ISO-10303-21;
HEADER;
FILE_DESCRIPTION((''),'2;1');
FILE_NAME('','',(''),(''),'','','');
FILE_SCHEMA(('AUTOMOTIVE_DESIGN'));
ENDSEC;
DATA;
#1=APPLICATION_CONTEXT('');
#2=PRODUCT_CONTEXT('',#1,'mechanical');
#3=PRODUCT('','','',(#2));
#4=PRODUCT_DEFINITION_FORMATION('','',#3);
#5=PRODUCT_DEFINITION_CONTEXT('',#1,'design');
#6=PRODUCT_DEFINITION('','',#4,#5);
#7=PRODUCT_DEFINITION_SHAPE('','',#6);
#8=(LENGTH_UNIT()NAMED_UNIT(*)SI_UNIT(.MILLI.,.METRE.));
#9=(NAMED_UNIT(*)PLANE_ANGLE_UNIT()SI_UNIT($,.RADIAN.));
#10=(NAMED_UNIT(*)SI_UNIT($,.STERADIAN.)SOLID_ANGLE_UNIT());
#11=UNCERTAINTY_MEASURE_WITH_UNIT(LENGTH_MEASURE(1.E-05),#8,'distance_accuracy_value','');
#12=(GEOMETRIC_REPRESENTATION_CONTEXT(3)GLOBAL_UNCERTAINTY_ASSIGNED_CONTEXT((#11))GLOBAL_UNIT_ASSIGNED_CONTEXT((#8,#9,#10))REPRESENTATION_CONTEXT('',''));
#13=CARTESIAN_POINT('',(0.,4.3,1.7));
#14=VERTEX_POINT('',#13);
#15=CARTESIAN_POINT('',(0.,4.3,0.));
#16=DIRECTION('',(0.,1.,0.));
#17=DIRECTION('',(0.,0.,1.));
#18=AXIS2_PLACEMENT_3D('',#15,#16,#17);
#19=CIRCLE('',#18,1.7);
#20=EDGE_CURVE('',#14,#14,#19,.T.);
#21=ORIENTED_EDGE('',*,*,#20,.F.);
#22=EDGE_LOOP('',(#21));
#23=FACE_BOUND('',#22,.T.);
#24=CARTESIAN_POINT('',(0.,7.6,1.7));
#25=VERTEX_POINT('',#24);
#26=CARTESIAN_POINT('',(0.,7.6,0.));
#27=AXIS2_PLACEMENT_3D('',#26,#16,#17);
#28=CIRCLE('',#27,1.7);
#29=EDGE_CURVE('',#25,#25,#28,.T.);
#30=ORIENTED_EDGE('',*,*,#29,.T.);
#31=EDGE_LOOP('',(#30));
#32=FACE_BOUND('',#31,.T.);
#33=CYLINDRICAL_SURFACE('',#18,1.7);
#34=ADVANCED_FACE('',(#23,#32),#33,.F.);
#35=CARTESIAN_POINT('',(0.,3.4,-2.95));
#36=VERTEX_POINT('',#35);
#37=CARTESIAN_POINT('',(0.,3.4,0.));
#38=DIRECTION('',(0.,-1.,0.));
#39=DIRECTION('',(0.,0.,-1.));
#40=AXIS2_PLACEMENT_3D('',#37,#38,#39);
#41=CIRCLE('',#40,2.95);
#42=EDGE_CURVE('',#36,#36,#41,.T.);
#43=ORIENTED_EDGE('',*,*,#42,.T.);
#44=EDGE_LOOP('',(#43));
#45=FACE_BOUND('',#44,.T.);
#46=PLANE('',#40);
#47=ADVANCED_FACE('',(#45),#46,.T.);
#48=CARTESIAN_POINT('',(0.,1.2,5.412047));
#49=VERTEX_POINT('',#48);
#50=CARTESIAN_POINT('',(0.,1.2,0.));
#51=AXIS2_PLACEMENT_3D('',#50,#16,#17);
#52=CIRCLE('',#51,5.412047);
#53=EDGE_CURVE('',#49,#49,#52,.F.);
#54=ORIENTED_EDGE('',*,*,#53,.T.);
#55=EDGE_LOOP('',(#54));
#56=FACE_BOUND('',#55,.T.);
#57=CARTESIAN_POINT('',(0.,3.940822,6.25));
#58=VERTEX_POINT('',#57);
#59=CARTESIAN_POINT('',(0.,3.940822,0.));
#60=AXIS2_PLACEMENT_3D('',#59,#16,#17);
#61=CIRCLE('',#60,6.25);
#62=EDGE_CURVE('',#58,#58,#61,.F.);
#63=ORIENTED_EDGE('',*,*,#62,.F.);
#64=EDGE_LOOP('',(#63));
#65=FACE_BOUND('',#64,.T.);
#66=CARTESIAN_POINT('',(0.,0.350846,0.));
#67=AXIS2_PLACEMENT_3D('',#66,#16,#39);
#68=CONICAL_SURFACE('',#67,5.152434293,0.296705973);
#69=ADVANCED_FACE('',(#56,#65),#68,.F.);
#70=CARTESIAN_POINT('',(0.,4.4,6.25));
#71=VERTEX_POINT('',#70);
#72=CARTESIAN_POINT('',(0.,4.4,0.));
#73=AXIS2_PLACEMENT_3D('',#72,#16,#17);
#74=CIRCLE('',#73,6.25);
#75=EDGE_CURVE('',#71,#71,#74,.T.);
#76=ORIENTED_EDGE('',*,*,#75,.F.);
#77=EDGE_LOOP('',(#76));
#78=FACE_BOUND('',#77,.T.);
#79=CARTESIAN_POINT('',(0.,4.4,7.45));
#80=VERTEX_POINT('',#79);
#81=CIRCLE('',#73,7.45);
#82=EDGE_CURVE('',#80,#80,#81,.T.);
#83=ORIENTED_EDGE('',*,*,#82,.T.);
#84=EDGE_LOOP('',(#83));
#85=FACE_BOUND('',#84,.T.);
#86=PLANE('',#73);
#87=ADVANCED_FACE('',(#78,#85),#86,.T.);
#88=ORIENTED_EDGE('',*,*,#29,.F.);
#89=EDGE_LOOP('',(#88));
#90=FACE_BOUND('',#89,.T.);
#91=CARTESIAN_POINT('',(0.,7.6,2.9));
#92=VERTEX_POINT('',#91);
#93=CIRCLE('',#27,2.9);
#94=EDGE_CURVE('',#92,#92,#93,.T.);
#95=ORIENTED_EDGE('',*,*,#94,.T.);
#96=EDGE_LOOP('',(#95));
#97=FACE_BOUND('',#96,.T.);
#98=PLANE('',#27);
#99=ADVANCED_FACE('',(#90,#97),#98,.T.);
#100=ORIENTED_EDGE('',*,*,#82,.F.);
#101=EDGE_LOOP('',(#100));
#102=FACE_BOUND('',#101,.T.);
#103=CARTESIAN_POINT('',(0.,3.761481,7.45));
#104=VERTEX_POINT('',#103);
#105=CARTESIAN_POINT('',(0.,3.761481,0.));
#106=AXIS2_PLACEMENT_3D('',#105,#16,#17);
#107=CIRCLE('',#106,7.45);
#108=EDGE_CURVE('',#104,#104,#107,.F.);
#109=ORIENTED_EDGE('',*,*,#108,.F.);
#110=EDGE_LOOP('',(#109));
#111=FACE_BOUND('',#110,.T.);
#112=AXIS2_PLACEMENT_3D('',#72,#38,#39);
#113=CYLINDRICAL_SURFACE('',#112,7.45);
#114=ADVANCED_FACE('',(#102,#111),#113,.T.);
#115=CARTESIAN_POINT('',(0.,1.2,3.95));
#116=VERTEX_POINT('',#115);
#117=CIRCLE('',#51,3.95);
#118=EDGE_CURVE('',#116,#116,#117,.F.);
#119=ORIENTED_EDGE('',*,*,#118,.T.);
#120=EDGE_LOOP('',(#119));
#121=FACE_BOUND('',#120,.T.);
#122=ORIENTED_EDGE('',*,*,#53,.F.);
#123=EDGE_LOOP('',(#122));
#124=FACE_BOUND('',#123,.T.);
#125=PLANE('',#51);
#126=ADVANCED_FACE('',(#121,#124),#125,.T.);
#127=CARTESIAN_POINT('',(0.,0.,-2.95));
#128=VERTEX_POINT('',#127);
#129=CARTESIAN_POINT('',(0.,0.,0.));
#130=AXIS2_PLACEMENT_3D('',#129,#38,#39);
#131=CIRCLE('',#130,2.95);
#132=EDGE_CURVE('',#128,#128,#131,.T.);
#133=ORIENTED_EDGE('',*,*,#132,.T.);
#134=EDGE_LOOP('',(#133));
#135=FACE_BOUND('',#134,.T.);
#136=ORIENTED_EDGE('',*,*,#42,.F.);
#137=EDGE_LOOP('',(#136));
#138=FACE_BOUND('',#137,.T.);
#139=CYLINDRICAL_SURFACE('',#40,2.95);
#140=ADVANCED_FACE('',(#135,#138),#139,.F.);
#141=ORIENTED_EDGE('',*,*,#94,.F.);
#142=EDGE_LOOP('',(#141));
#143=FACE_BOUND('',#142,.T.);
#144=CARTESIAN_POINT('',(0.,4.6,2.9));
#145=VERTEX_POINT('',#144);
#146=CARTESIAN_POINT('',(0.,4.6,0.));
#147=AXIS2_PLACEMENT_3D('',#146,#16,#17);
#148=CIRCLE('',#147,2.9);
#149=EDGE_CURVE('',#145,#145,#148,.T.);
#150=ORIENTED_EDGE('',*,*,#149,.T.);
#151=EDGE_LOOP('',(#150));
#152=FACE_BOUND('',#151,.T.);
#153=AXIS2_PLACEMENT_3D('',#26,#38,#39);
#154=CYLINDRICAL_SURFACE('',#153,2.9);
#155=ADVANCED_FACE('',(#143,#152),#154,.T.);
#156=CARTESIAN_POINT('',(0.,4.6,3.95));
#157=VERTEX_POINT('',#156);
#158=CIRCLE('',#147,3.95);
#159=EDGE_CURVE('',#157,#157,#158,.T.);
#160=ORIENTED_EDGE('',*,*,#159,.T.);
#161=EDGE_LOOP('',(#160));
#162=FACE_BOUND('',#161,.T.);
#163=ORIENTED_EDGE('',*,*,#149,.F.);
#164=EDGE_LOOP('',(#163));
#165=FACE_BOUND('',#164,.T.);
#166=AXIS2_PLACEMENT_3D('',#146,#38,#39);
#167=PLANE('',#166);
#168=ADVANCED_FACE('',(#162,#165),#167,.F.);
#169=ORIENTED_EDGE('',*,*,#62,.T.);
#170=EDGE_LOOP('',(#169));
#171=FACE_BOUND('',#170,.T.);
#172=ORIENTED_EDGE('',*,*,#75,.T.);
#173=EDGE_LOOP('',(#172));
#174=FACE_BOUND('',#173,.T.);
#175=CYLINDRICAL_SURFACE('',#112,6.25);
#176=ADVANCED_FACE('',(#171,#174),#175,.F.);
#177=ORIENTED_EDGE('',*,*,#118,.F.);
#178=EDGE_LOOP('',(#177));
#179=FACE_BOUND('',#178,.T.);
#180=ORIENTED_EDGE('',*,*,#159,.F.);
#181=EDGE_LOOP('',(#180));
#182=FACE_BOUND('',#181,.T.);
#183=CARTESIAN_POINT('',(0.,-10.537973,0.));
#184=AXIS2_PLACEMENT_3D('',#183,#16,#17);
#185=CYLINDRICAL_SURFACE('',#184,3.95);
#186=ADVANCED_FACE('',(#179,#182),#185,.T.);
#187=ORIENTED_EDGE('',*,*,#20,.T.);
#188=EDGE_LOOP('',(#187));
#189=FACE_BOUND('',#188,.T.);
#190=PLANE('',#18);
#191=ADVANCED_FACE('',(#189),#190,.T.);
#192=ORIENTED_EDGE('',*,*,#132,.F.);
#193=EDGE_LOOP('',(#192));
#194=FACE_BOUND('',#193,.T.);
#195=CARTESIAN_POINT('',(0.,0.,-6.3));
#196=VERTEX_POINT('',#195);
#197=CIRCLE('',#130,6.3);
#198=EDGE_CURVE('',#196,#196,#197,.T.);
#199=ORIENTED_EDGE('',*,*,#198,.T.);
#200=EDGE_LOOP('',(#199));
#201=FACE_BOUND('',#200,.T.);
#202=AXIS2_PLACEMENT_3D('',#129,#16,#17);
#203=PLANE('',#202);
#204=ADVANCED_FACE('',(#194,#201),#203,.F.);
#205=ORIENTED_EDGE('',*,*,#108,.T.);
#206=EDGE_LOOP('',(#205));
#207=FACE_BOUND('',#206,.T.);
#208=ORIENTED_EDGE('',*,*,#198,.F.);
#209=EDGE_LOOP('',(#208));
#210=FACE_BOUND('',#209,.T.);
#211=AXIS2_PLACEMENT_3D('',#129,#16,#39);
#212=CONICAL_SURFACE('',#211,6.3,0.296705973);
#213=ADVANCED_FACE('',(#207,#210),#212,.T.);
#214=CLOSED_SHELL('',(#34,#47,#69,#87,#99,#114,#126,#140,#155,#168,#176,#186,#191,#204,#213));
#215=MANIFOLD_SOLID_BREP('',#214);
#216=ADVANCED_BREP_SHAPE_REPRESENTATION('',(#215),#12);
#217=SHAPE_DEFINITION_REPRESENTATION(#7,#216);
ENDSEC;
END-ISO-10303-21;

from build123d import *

# Parameters (mm, degrees)
SKETCH1_R           = 7.45
BOSS_EXTRUDE1_DEPTH = 4.4
SKETCH2_R           = 2.95
CUT_EXTRUDE1_DEPTH  = 3.4
SKETCH3_OUTSIDE_W   = 24.262
SKETCH3_OUTSIDE_H   = 24.262
SKETCH3_OUTSIDE_R   = 6.3
CUT_EXTRUDE2_DEPTH  = 5
CUT_EXTRUDE2_DRAFT  = -17
SHELL1_2_OUTLINE_W  = 4.15
SHELL1_2_OUTLINE_H  = 0.2
CUT_EXTRUDE3_START  = -3.4
SKETCH4_R           = 4.15
SKETCH4_R_2         = 3.95
CUT_EXTRUDE3_DEPTH  = 3.4
SKETCH5_R           = 2.9
BOSS_EXTRUDE2_DEPTH = 3
SKETCH6_R           = 1.7
CUT_EXTRUDE4_DEPTH  = 3.3


# Read off the part's stored shape, not the designer's step: Shell1
with BuildPart() as part:
    # Sketch1 → Boss-Extrude1 (new body)
    with BuildSketch(Plane(origin=(0, 0, 0), x_dir=(1, 0, 0), z_dir=(0, 1, 0))):
        with Locations(Location((0, 0, 0), (0, 0, 270))):
            Circle(SKETCH1_R)
    extrude(amount=BOSS_EXTRUDE1_DEPTH)

    # Sketch2 → Cut-Extrude1 (cut)
    with BuildSketch(Plane.XZ):
        with Locations(Location((0, 0, 0), (0, 0, 270))):
            Circle(SKETCH2_R)
    extrude(amount=-CUT_EXTRUDE1_DEPTH, mode=Mode.SUBTRACT)


with BuildPart() as cut_extrude2_tool:
    # Sketch3 outside → Cut-Extrude2 (with draft: the straight prism first)
    with BuildSketch(Plane(origin=(0, 0, 0), x_dir=(-1, 0, 0), z_dir=(0, -1, 0))):
        Rectangle(SKETCH3_OUTSIDE_W, SKETCH3_OUTSIDE_H)
        Circle(SKETCH3_OUTSIDE_R, mode=Mode.SUBTRACT)
    extrude(amount=-CUT_EXTRUDE2_DEPTH)
    # Cut-Extrude2: the draft: its side faces are tilted about the plane it starts from
    cut_extrude2_sides = [cut_extrude2_tool.faces().sort_by_distance(p)[0] for p in [
        (0, 2.5, 12.131),
        (-12.131, 2.5, 0),
        (0, 2.5, -12.131),
        (12.131, 2.5, 0),
        (6.3, 2.5, 0),
    ]]
    draft(cut_extrude2_sides, Plane(origin=(0, 0, 0), x_dir=(-1, 0, 0), z_dir=(0, -1, 0)), CUT_EXTRUDE2_DRAFT)


with BuildPart() as part_1:
    add(part.part)

    # Cut-Extrude2: cut by cut_extrude2_tool
    add(cut_extrude2_tool.part, mode=Mode.SUBTRACT)

    # Shell1 outline → Shell1 (revolve, cut)
    with BuildSketch(Plane.XY):
        Polygon((4.15, 4.4), (4.15, 1.2), (5.41204671, 1.2), (6.25, 3.940821713), (6.25, 4.4), align=None)
    revolve(axis=Axis((0, 0, 0), (0, 1, 0)), mode=Mode.SUBTRACT)

    # Shell1 2 outline → Shell1 2 (revolve)
    with BuildSketch(Plane.XY):
        with Locations((2.075, 4.5)):
            Rectangle(SHELL1_2_OUTLINE_W, SHELL1_2_OUTLINE_H)
    revolve(axis=Axis((0, 0, 0), (0, 1, 0)))

    # Sketch4 → Cut-Extrude3 (cut)
    with BuildSketch(Plane(origin=(0, 4.6, 0), x_dir=(1, 0, 0), z_dir=(0, 1, 0)).offset(CUT_EXTRUDE3_START)):
        Circle(SKETCH4_R)
        with Locations(Location((0, 0, 0), (0, 0, 270))):
            Circle(SKETCH4_R_2, mode=Mode.SUBTRACT)
    extrude(amount=CUT_EXTRUDE3_DEPTH, mode=Mode.SUBTRACT)

    # Sketch5 → Boss-Extrude2 (add)
    with BuildSketch(Plane(origin=(0, 4.6, 0), x_dir=(1, 0, 0), z_dir=(0, 1, 0))):
        with Locations(Location((0, 0, 0), (0, 0, 270))):
            Circle(SKETCH5_R)
    extrude(amount=BOSS_EXTRUDE2_DEPTH)

    # Sketch6 → Cut-Extrude4 (cut)
    with BuildSketch(Plane(origin=(0, 7.6, 0), x_dir=(1, 0, 0), z_dir=(0, 1, 0))):
        with Locations(Location((0, 0, 0), (0, 0, 270))):
            Circle(SKETCH6_R)
    extrude(amount=-CUT_EXTRUDE4_DEPTH, mode=Mode.SUBTRACT)


solid = part_1.part
